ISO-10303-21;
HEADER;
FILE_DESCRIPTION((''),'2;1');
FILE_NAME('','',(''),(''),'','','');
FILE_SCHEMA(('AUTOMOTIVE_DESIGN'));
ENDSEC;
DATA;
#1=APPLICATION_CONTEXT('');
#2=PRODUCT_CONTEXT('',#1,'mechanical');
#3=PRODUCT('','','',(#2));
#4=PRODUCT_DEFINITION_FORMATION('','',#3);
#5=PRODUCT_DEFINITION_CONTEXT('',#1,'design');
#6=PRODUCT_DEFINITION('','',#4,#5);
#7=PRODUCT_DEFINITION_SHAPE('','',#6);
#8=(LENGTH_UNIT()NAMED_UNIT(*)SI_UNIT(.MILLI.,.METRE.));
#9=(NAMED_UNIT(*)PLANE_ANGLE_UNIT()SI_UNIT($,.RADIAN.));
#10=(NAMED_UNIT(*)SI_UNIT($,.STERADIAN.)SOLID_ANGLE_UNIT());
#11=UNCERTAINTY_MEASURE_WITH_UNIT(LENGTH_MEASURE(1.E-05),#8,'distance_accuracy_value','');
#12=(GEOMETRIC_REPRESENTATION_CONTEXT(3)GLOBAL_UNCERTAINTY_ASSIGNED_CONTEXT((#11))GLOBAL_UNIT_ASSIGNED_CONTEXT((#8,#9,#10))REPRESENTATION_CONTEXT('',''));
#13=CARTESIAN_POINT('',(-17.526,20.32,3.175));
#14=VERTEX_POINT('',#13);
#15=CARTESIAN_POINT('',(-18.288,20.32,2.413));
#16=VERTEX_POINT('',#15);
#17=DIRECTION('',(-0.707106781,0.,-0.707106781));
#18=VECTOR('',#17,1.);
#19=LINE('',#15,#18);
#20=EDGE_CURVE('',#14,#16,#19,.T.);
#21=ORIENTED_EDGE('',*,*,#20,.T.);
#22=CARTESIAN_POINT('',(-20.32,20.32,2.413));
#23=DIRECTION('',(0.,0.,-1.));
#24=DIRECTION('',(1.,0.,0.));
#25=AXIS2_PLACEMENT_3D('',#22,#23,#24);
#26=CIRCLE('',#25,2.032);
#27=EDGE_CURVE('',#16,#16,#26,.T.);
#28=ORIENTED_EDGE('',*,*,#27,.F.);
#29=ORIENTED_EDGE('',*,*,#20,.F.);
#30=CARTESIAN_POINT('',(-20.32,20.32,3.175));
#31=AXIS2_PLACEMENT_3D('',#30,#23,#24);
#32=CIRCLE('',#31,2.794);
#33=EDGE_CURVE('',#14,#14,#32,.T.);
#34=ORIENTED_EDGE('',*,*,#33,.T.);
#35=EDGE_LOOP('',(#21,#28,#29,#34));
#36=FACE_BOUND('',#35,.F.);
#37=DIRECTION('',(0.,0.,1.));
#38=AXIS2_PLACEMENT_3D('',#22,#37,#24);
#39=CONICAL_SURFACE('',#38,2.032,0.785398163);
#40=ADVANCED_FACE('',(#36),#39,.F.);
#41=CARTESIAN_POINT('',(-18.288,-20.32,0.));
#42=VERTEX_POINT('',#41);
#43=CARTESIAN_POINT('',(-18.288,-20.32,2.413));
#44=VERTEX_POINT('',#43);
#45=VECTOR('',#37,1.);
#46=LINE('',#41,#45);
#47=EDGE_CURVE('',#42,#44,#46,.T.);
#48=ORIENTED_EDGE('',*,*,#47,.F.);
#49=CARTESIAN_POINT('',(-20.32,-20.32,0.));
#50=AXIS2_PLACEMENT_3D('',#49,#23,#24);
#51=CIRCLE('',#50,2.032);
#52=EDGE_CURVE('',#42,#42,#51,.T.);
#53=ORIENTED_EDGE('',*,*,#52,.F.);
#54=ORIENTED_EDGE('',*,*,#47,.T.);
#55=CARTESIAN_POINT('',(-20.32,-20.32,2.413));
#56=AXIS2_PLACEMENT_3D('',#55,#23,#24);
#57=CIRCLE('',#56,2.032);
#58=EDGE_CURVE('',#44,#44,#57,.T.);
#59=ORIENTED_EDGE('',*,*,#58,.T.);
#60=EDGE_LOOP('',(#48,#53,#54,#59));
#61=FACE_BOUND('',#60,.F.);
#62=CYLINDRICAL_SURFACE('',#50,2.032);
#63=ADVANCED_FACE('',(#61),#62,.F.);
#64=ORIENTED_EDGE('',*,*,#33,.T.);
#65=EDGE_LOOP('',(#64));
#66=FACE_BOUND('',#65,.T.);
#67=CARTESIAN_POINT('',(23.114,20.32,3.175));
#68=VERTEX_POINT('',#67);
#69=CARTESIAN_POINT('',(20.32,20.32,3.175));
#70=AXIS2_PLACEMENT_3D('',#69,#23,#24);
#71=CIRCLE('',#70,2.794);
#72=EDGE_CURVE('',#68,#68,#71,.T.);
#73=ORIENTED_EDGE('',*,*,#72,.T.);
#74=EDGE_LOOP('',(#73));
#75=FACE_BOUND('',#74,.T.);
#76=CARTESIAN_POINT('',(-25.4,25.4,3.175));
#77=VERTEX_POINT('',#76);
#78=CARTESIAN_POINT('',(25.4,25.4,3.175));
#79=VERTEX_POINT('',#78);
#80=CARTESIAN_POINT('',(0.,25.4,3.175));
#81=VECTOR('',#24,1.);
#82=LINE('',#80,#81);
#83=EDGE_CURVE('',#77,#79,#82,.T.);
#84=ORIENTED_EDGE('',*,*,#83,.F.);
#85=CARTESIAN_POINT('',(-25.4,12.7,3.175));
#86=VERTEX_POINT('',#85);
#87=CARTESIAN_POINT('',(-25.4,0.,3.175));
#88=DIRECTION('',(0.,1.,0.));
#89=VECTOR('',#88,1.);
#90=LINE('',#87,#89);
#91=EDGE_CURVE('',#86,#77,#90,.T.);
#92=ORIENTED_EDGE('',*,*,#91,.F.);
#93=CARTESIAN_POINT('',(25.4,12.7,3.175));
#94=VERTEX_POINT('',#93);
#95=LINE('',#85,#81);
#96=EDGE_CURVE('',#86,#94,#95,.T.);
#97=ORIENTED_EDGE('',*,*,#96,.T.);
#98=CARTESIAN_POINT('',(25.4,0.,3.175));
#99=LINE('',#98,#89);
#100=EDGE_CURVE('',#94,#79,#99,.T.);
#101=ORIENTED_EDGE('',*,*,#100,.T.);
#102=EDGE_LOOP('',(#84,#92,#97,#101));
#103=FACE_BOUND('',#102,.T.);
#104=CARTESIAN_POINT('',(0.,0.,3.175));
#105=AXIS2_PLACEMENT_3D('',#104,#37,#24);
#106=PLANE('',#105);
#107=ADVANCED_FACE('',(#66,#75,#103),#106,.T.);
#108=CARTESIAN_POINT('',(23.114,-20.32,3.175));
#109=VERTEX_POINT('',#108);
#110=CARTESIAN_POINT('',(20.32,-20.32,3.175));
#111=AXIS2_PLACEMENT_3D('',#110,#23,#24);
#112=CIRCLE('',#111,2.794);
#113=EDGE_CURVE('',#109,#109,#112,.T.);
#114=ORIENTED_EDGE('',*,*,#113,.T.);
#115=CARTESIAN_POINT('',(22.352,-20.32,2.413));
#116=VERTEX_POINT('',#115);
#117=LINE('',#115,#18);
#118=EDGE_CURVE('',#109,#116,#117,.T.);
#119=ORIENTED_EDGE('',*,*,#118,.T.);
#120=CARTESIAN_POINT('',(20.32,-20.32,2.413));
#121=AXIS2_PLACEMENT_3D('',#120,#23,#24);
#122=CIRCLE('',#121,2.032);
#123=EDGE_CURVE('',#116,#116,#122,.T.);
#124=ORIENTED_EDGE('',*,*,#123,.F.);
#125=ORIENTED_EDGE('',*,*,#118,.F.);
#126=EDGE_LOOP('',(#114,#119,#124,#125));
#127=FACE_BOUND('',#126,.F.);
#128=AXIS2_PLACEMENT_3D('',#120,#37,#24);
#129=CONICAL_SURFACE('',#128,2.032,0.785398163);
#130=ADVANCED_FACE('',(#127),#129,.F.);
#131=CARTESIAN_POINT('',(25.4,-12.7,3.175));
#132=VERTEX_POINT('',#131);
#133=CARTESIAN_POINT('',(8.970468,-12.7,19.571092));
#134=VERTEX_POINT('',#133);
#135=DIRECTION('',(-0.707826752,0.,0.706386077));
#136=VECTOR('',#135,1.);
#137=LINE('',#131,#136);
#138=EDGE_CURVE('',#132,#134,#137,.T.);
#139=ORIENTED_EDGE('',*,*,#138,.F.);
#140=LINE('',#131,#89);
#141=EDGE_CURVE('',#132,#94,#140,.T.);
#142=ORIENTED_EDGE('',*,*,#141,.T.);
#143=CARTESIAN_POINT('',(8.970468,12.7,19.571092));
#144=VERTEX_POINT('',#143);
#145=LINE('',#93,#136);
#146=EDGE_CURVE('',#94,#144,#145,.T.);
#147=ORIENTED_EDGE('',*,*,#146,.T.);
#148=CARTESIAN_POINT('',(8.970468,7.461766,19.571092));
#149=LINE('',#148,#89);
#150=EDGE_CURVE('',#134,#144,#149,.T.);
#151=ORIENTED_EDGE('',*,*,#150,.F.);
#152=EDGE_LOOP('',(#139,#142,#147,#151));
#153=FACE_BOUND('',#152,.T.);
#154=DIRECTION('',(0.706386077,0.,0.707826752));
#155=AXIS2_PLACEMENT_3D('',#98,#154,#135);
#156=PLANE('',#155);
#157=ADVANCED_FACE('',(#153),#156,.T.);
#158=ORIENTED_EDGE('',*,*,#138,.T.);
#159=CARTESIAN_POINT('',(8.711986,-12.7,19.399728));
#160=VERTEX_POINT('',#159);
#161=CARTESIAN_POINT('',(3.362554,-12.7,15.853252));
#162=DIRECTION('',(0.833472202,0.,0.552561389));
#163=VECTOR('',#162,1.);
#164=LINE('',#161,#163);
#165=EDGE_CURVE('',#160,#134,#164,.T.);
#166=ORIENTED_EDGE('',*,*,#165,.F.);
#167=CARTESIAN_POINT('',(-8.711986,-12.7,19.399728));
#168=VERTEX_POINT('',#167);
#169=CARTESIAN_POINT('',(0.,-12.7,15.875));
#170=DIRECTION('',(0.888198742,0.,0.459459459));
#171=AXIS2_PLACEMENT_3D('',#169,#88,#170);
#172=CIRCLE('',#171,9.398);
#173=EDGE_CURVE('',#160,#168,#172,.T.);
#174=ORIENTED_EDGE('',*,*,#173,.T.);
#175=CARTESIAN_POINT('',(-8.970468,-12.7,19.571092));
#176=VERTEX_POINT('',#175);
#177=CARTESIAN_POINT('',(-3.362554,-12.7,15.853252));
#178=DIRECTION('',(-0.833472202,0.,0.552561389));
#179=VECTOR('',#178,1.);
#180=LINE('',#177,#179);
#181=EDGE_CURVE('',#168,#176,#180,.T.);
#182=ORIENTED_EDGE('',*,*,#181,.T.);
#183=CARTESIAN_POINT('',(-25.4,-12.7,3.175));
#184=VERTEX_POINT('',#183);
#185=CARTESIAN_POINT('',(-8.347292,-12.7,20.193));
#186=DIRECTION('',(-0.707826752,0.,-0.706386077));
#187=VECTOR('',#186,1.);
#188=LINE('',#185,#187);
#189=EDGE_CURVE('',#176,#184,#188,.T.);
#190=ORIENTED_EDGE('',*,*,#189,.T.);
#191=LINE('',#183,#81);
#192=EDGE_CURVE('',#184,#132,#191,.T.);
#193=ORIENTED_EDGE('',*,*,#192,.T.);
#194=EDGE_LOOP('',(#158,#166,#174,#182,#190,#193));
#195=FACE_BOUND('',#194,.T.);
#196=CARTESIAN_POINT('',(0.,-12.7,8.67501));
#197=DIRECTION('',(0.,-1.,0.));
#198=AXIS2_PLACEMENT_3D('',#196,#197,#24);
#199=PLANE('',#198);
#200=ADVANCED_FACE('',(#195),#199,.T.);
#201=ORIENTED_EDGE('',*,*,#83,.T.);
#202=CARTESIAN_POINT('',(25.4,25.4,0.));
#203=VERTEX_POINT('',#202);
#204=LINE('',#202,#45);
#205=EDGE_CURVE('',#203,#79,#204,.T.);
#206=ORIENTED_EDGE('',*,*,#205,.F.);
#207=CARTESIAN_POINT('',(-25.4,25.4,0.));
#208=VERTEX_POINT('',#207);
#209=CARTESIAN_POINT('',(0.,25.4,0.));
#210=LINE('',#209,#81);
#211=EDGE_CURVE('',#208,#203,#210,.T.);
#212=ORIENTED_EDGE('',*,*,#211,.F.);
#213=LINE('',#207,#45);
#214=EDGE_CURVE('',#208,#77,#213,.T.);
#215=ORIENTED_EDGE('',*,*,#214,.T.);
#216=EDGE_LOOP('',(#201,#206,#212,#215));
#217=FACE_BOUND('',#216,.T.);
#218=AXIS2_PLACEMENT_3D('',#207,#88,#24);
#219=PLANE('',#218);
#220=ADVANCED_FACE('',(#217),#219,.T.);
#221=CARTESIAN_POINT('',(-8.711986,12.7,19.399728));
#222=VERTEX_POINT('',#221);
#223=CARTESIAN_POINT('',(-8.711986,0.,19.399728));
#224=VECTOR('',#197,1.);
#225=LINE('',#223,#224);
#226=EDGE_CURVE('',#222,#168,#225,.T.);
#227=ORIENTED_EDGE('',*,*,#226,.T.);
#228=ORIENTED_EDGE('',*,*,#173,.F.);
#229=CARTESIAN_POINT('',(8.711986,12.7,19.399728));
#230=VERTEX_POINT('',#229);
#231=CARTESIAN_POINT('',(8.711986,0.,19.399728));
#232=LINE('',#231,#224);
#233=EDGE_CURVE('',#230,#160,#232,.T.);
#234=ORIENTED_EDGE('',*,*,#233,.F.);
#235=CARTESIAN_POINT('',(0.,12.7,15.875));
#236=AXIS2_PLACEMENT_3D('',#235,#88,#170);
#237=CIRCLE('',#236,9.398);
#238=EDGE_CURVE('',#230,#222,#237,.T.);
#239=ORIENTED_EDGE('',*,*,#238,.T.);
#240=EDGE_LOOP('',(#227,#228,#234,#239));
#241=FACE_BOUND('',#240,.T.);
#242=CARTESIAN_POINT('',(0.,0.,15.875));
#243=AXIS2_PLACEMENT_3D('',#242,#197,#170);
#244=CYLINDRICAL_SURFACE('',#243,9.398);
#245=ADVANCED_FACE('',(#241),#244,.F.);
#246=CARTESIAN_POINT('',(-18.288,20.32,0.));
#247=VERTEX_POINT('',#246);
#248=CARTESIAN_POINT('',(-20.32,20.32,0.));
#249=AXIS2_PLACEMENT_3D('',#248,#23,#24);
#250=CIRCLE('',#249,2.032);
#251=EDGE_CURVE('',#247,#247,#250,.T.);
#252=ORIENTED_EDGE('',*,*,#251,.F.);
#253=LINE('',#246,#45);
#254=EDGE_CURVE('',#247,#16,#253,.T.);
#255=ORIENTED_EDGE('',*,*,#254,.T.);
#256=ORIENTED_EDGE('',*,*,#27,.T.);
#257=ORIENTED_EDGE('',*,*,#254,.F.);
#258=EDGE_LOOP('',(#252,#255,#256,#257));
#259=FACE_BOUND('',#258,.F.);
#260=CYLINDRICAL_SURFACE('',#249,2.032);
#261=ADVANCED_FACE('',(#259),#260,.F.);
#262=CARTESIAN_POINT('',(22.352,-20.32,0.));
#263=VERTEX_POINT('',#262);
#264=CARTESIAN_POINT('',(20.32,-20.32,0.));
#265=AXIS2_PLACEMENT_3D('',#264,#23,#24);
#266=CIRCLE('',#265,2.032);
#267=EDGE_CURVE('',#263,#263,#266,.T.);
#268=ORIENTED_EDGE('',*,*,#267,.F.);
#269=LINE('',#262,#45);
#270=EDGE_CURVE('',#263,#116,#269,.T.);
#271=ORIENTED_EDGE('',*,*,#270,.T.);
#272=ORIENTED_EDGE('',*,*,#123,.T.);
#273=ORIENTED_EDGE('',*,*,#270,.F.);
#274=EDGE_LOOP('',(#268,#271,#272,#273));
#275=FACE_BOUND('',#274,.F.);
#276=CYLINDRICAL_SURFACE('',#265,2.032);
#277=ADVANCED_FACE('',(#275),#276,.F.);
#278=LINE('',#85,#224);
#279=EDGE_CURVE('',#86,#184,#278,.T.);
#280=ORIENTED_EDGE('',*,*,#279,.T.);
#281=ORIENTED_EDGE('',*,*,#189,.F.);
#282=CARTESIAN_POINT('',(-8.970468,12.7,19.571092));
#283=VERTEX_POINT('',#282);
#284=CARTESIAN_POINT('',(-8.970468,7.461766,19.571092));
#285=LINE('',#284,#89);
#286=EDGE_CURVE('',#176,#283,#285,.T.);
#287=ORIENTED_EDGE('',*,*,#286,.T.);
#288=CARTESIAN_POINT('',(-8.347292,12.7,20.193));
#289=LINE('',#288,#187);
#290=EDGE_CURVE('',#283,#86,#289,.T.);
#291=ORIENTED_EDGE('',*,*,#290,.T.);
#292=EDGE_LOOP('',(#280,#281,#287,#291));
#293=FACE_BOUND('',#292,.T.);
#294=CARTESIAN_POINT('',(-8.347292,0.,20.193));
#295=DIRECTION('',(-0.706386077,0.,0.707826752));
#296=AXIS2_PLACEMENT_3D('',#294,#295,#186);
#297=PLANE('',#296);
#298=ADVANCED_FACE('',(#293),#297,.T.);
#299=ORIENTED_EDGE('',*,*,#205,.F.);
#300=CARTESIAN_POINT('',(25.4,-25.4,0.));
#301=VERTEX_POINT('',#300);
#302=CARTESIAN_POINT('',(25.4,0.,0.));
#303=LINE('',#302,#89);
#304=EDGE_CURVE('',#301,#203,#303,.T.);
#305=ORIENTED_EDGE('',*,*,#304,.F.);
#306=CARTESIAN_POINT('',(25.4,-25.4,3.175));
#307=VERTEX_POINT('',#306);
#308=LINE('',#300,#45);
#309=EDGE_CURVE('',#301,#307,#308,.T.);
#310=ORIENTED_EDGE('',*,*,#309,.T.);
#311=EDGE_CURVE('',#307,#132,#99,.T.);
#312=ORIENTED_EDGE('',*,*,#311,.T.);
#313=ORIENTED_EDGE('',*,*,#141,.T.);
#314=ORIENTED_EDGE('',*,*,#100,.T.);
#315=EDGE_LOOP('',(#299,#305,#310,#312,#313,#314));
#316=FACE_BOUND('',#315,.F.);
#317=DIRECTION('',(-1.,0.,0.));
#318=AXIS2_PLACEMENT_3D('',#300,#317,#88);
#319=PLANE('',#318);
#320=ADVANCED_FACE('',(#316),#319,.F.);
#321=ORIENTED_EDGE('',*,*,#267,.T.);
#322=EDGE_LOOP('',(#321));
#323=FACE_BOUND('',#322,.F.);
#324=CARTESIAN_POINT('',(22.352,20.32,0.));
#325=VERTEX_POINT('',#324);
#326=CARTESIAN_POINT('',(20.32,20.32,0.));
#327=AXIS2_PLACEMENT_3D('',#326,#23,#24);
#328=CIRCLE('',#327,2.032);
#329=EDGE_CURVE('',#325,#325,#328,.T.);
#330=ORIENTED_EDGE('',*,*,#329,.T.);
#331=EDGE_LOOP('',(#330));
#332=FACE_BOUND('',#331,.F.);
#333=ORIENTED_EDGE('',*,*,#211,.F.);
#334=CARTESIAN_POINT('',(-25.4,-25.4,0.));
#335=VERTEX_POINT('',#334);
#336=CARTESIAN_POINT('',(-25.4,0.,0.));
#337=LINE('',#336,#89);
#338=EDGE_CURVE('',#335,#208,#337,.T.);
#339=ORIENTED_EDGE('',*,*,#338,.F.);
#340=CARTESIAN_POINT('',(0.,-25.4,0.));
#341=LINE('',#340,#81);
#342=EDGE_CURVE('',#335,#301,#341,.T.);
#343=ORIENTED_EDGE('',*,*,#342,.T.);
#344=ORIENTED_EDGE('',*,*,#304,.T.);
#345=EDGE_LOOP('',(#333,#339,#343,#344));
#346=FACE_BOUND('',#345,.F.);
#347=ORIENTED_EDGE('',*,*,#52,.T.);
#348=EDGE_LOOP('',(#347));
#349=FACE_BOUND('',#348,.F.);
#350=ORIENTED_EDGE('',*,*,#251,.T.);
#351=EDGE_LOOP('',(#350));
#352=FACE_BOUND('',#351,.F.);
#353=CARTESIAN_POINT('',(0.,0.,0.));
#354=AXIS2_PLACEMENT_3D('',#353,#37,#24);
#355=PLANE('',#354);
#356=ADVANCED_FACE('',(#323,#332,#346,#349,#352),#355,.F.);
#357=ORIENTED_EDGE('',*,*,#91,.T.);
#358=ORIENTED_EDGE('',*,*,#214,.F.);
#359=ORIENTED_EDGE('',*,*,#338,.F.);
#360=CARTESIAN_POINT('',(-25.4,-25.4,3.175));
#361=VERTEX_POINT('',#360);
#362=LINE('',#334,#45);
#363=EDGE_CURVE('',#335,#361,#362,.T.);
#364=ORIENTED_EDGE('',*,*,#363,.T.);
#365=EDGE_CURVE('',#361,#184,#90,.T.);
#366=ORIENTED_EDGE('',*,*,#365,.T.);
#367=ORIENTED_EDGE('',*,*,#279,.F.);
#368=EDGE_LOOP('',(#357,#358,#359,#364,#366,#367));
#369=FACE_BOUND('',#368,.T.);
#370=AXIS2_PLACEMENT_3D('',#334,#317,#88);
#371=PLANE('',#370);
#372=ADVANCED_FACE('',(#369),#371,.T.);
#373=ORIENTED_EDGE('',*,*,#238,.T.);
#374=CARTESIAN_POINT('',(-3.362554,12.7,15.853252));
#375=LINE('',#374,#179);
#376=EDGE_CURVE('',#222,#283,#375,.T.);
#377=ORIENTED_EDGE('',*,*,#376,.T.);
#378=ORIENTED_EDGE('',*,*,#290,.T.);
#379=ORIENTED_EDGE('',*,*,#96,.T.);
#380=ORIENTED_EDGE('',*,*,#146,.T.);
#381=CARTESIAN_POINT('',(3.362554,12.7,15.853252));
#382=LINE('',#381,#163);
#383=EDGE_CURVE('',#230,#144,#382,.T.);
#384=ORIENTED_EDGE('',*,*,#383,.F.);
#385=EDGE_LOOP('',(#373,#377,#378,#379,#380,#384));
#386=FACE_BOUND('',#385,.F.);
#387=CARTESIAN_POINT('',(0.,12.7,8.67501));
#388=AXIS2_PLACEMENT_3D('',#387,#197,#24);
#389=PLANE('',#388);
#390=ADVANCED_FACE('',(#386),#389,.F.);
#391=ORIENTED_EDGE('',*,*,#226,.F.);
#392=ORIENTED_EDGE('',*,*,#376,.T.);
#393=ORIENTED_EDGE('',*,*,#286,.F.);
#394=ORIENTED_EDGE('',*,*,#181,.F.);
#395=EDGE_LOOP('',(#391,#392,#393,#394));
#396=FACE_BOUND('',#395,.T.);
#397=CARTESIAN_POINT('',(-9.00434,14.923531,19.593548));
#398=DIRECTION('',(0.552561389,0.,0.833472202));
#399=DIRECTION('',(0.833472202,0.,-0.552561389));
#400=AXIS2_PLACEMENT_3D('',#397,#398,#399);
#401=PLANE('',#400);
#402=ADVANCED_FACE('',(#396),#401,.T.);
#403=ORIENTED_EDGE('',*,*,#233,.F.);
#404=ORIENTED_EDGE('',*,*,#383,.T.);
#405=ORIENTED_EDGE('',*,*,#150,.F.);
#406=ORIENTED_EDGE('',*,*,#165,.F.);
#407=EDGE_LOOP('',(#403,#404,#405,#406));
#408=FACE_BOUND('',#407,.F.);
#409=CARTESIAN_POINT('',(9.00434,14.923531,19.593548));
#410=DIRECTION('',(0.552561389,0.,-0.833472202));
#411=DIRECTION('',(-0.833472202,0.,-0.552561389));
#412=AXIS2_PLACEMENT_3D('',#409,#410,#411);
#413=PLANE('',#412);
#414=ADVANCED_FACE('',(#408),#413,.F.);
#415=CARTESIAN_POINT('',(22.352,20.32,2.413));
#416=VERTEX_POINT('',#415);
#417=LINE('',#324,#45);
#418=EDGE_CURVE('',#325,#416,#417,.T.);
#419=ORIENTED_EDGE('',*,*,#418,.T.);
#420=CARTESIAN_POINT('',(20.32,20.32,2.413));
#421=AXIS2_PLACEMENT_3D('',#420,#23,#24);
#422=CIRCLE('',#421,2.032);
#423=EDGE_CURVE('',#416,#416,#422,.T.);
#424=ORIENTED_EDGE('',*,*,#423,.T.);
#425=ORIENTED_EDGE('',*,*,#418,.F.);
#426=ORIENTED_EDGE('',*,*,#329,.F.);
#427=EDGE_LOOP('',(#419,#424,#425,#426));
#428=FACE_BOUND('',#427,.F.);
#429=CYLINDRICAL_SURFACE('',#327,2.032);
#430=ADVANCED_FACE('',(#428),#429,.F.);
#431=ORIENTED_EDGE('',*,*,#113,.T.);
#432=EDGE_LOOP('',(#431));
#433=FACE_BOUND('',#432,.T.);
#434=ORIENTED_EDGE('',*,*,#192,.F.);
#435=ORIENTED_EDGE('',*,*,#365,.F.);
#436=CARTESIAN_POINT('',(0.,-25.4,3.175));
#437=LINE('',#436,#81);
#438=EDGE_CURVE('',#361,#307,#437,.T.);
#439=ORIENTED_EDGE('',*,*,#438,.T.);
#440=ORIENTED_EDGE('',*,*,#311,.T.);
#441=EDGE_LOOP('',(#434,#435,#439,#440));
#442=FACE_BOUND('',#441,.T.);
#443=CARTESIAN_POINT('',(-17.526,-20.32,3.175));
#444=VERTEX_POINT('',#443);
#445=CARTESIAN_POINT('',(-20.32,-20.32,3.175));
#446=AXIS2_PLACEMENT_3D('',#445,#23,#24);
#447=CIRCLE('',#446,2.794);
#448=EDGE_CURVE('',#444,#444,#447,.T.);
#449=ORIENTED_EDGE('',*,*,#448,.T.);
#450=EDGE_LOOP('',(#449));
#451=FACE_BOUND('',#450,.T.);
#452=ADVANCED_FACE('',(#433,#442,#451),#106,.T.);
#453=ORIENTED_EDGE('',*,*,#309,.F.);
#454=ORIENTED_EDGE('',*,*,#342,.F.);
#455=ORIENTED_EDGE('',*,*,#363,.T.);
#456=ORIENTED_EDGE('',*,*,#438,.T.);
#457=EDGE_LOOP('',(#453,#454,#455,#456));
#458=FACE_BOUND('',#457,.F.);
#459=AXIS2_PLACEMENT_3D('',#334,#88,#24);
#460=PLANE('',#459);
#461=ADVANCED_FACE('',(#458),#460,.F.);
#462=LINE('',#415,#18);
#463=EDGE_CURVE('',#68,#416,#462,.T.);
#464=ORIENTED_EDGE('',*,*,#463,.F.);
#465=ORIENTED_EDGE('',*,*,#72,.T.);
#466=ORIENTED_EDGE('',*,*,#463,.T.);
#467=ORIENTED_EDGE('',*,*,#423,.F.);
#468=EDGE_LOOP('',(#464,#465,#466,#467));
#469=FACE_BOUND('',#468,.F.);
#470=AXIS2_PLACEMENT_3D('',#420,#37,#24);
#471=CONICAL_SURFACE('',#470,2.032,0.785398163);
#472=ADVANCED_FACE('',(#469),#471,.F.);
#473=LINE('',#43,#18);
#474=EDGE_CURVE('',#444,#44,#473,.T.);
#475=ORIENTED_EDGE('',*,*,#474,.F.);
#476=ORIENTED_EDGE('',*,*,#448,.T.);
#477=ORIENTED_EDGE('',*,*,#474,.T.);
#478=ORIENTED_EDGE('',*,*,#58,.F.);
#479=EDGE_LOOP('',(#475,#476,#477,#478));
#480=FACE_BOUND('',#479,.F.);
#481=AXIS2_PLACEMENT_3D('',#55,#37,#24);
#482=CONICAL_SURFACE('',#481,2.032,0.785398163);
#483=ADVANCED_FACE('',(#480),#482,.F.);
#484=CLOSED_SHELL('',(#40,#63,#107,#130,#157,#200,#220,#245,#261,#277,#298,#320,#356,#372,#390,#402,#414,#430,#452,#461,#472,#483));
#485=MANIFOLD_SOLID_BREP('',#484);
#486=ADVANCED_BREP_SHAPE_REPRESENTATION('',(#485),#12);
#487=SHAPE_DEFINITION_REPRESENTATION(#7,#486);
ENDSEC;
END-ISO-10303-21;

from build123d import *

# Parameters (mm, degrees)
F0_W        = 50.8
F0_H        = 50.8
F1_DEPTH    = 3.175
F3_DEPTH    = 12.7
F4_T1_DEPTH = 29.8470625703
F5_R        = 2.032
F6_DEPTH    = 25.4
F7_SIZE     = 0.762


# Not quite as in the source:
# - a fillet or chamfer that OpenCascade refuses, or shapes differently, is made with other operations: its cross-section is extruded or revolved along the edge and cut away or added


with BuildPart() as f1:
    # F0 (on Top) → F1 (new body)
    with BuildSketch(Plane.XY):
        Rectangle(F0_W, F0_H)
    extrude(amount=F1_DEPTH)

    # F2 (on Front) → F3 (join, symmetric)
    with BuildSketch(Plane.XZ):
        with BuildLine():
            ThreePointArc((8.3472917764, 20.193), (0, 6.477), (-8.3472917764, 20.193))
            Line((-8.3472917764, 20.193), (-25.4, 3.175))
            Line((-25.4, 3.175), (25.4, 3.175))
            Line((25.4, 3.175), (8.3472917764, 20.193))
        make_face()
    extrude(amount=F3_DEPTH, both=True)

    # F4: chamfer of 1.016 on 2 edges, made by hand

    # F4_s2 → F4_t1 (cut)
    with BuildSketch(Plane.XZ.offset(-14.9235312851)):
        with BuildLine():
            Line((-9.00434009, 19.5935484726), (-8.6781133788, 19.3772721718))
            Line((-8.6781133788, 19.3772721718), (-8.659276653, 19.3696511377))
            ThreePointArc((-8.659276653, 19.3696511377), (-8.5217005097, 19.7892691023), (-8.3292435779, 20.1836637838))
            Line((-8.3292435779, 20.1836637838), (-8.3616455415, 20.2073830396))
            ThreePointArc((-8.3616455415, 20.2073830396), (-8.6761048617, 19.893563754), (-9.0186938551, 19.6079315122))
            Line((-9.0186938551, 19.6079315122), (-9.00434009, 19.5935484726))
        make_face()
        with BuildLine():
            Line((9.00434009, 19.5935484726), (8.6781133788, 19.3772721718))
            Line((8.6781133788, 19.3772721718), (8.659276653, 19.3696511377))
            ThreePointArc((8.659276653, 19.3696511377), (8.5217005097, 19.7892691023), (8.3292435779, 20.1836637838))
            Line((8.3292435779, 20.1836637838), (8.3616455415, 20.2073830396))
            ThreePointArc((8.3616455415, 20.2073830396), (8.6761048617, 19.893563754), (9.0186938551, 19.6079315122))
            Line((9.0186938551, 19.6079315122), (9.00434009, 19.5935484726))
        make_face()
    extrude(amount=F4_T1_DEPTH, mode=Mode.SUBTRACT)

    # F5 (on face) → F6 (cut)
    with BuildSketch(Plane(origin=(0, 0, 0), x_dir=(1, 0, 0), z_dir=(0, 0, -1))):
        with Locations((-20.32, 20.32)):
            Circle(F5_R)
        with Locations((-20.32, -20.32)):
            Circle(F5_R)
        with Locations((20.32, 20.32)):
            Circle(F5_R)
        with Locations((20.32, -20.32)):
            Circle(F5_R)
    extrude(amount=-F6_DEPTH, mode=Mode.SUBTRACT)

    # F7
    f7_edges = [f1.edges().sort_by_distance(p)[0] for p in [
        (-22.352, -20.32, 3.175),
        (-22.352, 20.32, 3.175),
        (18.288, 20.32, 3.175),
        (18.288, -20.32, 3.175),
    ]]
    chamfer(f7_edges, length=F7_SIZE)


solid = f1.part
